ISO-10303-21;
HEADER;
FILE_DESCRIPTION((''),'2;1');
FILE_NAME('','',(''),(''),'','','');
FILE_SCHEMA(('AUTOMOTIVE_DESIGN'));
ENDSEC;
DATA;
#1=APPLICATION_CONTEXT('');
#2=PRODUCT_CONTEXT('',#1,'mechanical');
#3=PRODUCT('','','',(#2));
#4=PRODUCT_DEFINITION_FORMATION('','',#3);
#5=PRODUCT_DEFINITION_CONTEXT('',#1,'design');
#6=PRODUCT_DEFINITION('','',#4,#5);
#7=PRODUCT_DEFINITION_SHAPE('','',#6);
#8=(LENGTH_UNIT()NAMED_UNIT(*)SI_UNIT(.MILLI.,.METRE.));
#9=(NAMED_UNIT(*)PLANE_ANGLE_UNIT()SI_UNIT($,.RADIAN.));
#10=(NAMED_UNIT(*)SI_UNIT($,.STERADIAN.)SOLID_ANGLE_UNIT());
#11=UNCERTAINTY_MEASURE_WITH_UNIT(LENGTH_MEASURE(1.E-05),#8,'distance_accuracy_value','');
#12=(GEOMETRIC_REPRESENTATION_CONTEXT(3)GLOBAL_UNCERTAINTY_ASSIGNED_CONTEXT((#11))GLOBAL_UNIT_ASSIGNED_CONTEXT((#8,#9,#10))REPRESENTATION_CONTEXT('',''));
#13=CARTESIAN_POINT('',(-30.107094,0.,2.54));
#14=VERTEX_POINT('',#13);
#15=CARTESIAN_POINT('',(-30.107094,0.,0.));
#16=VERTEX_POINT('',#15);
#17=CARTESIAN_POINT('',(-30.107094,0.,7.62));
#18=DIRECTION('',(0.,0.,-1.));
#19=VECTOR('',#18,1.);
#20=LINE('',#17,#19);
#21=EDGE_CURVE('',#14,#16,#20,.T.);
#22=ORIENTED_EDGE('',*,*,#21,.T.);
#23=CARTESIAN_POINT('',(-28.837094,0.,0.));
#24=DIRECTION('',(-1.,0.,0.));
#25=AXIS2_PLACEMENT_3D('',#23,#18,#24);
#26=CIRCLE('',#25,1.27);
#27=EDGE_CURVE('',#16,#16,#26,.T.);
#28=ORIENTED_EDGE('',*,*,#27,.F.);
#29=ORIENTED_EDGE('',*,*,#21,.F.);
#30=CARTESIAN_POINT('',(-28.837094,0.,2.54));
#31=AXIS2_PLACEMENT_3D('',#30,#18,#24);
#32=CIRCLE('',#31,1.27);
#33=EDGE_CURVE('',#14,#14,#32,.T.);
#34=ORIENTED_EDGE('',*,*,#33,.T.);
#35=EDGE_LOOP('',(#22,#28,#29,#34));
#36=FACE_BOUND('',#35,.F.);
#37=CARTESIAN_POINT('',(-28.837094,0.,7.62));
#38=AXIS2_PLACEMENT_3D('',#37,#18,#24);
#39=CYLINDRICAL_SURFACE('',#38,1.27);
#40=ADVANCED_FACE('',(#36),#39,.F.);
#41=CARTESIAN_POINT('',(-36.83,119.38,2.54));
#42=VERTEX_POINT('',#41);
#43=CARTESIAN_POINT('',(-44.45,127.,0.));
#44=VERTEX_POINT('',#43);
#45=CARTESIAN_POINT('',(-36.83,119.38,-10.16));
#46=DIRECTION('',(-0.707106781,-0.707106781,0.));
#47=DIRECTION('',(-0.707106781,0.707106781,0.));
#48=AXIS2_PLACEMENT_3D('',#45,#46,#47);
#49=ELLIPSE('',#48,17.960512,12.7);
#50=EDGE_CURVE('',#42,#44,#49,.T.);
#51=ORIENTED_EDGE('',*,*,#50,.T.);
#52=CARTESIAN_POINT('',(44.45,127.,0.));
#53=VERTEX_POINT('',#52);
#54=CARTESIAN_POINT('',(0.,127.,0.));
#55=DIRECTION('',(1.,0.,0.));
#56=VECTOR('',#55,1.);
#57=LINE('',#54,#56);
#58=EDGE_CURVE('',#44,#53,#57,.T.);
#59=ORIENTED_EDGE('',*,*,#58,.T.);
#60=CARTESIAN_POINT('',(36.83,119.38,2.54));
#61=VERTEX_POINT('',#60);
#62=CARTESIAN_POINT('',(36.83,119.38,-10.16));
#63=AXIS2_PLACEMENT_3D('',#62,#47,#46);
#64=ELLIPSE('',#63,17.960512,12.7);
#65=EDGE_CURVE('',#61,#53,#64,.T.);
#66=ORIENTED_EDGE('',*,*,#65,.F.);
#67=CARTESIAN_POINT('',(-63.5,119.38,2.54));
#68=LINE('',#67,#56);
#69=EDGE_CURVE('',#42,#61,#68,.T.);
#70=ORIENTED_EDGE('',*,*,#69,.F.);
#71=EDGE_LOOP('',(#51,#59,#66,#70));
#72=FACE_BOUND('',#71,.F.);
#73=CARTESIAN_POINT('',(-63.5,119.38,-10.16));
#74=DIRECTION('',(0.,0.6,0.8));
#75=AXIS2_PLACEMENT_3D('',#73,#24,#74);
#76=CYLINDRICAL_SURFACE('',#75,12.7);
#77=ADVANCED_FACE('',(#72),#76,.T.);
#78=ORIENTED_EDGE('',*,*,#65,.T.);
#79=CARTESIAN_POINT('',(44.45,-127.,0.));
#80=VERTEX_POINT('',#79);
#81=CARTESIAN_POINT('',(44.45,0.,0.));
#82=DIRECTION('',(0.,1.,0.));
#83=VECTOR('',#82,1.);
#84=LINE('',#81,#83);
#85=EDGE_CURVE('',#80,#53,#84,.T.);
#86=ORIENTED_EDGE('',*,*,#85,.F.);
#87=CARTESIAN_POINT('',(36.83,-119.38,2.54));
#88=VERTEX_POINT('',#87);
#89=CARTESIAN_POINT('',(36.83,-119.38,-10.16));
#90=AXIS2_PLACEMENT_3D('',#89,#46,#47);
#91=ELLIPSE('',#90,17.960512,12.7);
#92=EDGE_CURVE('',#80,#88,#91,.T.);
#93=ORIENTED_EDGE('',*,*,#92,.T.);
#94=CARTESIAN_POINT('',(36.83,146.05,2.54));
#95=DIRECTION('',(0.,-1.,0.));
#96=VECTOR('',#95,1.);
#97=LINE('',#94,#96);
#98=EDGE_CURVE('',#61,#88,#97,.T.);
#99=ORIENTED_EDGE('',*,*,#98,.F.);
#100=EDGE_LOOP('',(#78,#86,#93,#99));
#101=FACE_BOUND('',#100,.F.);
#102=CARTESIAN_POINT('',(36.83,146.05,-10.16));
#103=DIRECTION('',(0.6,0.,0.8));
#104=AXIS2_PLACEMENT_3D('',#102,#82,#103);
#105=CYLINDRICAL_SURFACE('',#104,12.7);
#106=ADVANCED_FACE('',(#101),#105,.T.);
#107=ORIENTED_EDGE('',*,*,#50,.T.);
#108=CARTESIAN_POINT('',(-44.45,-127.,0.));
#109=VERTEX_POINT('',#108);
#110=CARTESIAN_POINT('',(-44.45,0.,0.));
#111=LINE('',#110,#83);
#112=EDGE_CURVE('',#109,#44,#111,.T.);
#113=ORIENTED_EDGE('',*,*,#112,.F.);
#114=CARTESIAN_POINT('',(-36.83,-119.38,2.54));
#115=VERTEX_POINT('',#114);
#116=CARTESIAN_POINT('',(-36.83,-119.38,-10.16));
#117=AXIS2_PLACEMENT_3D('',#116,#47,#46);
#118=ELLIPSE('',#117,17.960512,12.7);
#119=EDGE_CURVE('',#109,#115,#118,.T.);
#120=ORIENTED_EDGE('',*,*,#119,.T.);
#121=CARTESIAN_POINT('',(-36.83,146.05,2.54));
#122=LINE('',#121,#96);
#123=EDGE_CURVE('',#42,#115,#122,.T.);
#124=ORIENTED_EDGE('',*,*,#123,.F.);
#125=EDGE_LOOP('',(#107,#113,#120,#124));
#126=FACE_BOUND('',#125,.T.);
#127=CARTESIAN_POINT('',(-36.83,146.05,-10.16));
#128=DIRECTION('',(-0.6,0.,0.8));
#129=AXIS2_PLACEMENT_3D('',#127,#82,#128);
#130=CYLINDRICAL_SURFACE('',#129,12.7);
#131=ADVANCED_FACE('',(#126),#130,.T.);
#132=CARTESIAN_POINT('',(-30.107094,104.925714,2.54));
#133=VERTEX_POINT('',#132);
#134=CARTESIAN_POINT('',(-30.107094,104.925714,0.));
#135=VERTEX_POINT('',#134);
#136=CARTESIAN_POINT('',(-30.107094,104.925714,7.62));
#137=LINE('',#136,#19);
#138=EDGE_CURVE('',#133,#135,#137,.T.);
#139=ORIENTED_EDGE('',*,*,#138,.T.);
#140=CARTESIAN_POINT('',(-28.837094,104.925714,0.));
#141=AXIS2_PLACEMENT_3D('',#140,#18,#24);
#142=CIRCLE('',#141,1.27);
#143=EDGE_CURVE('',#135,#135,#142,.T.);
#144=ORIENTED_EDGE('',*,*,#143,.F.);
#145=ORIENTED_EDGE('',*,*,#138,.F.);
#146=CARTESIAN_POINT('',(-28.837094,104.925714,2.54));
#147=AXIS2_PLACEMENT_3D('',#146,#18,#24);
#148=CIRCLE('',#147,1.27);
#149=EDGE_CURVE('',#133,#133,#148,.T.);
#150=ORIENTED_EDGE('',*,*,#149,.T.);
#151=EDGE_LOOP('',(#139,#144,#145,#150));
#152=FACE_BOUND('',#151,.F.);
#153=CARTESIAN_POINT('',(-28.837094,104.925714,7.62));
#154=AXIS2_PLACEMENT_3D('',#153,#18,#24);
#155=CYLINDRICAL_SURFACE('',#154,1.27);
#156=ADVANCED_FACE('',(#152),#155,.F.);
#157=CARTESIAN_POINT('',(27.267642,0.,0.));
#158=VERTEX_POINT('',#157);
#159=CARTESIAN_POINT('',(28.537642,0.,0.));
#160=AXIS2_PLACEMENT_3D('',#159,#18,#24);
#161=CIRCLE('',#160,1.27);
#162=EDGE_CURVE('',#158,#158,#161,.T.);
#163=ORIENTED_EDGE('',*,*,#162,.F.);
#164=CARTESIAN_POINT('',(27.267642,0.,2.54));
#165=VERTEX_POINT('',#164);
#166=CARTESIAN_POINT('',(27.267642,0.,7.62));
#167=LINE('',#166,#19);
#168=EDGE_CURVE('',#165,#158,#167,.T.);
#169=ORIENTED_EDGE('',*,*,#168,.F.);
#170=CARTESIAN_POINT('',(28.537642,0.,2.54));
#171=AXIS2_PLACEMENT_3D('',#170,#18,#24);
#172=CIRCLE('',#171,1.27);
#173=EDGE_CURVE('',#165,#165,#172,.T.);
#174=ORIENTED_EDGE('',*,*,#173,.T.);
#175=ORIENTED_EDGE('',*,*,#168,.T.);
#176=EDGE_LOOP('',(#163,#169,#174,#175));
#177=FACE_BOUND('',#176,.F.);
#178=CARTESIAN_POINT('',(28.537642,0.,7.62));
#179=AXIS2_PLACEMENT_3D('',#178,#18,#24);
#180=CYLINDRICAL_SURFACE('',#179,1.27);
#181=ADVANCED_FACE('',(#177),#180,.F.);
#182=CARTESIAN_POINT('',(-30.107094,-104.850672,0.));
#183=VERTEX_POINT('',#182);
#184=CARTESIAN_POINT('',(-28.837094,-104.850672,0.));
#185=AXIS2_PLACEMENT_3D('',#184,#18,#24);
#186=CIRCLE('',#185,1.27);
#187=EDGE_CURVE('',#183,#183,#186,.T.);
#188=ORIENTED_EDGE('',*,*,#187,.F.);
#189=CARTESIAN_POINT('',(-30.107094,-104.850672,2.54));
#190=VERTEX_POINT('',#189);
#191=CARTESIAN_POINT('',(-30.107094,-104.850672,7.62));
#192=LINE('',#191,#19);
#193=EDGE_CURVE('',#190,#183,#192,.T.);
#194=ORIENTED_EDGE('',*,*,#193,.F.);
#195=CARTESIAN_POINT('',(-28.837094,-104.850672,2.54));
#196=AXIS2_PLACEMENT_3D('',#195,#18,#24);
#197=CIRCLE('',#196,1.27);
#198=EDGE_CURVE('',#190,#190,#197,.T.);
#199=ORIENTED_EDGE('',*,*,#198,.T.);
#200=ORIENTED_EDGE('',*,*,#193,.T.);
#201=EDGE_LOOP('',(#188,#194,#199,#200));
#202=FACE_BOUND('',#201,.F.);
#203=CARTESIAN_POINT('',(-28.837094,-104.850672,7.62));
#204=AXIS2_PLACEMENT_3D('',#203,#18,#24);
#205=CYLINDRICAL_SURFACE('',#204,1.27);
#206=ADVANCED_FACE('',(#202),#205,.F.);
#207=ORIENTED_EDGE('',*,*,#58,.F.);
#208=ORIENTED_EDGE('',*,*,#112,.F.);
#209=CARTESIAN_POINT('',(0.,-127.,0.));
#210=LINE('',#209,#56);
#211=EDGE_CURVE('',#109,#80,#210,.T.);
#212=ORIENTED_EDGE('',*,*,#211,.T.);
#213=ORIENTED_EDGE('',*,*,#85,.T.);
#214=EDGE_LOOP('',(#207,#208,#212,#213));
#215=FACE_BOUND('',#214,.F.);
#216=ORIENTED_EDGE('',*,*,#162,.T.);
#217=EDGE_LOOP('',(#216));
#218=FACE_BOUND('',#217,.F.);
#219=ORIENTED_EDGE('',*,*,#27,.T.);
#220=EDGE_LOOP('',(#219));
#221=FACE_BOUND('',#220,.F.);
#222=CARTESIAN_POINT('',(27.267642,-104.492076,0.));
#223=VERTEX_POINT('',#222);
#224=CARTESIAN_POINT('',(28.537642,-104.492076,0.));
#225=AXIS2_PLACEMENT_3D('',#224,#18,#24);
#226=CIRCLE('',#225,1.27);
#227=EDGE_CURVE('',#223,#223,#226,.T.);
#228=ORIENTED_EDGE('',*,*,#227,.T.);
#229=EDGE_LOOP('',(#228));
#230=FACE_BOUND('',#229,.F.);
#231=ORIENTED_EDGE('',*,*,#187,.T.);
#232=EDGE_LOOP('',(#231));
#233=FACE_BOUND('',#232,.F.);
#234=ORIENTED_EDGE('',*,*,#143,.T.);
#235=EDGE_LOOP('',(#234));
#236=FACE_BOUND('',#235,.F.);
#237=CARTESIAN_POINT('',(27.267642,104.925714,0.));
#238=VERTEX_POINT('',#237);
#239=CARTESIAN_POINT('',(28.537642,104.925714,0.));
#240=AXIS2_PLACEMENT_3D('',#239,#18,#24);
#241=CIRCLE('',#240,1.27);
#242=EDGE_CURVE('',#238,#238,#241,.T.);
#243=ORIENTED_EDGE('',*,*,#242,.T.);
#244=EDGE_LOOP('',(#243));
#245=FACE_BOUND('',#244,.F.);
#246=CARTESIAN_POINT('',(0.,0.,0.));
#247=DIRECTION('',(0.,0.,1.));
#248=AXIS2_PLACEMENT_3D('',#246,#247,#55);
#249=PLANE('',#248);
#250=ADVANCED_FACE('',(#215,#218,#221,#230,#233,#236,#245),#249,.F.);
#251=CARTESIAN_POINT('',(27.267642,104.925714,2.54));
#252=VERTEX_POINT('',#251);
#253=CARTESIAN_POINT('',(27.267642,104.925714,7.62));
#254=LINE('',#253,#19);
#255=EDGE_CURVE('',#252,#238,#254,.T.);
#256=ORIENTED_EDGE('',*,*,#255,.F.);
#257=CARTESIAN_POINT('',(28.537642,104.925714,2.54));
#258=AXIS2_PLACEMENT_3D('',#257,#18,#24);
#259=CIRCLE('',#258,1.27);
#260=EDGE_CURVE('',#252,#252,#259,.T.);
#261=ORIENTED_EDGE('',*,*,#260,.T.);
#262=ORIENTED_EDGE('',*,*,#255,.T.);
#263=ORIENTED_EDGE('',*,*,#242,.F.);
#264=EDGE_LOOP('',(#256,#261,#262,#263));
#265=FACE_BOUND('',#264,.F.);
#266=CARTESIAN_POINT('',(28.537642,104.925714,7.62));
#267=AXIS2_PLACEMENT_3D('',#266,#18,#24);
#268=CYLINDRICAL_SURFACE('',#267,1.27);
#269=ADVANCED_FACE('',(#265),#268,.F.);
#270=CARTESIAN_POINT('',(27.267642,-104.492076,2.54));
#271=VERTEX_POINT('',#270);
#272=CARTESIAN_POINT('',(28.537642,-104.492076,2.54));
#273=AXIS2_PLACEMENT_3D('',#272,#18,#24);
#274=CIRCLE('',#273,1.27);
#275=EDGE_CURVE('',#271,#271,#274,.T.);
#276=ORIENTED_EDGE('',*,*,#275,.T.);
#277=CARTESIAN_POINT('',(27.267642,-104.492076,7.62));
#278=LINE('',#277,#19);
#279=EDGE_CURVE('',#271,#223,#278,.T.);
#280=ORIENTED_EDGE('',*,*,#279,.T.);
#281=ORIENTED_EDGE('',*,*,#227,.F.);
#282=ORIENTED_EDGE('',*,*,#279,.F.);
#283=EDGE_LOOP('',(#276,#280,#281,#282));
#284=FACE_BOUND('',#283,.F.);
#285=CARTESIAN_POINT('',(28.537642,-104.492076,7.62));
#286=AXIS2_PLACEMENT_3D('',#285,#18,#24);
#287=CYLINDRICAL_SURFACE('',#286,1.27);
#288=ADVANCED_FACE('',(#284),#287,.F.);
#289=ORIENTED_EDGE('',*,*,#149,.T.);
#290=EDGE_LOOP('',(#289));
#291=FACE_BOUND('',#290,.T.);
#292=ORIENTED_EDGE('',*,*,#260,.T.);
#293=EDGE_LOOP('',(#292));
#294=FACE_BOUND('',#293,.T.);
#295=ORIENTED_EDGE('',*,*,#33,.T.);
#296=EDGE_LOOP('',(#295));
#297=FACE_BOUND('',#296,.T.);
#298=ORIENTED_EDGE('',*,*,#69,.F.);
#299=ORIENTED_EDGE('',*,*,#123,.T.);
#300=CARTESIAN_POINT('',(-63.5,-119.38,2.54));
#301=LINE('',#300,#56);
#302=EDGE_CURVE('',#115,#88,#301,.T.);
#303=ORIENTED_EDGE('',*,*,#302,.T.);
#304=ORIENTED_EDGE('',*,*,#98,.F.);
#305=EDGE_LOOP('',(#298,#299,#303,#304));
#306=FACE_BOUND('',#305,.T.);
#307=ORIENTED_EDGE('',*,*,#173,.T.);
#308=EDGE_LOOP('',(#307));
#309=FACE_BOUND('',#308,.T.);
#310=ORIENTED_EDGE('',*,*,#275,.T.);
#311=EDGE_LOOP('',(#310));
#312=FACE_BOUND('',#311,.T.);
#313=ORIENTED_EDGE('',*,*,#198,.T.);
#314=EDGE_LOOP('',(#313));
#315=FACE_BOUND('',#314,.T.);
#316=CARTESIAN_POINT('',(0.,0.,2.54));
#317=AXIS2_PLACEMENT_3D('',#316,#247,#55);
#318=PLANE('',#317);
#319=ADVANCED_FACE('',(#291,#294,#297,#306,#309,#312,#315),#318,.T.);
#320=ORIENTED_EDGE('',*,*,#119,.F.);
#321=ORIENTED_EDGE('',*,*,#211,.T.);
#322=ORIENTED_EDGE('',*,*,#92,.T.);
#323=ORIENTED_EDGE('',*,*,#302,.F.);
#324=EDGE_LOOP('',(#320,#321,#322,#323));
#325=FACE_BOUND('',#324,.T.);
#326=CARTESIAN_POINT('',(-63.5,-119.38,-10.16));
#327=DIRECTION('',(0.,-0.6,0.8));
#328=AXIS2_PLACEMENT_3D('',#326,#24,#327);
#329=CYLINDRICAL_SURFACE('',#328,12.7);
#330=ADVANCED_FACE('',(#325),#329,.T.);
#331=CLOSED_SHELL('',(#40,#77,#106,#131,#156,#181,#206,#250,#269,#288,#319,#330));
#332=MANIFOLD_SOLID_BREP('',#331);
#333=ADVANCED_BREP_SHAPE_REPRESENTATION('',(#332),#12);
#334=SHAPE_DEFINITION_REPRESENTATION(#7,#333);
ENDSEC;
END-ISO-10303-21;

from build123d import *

# Parameters (mm, degrees)
F0_W        = 88.9
F0_H        = 254
F1_DEPTH    = 2.54
F2_T1_DEPTH = 127
F2_T3_DEPTH = 292.1
F5_D        = 2.54
F5_DEPTH    = 5.08
F5_TIP      = 0.7630929862


# Not quite as in the source:
# - a fillet or chamfer that OpenCascade refuses, or shapes differently, is made with other operations: its cross-section is extruded or revolved along the edge and cut away or added


with BuildPart() as f1:
    # F0 (on Top) → F1 (new body)
    with BuildSketch(Plane.XY):
        Rectangle(F0_W, F0_H)
    extrude(amount=F1_DEPTH)

    # F2: fillet of radius 12.7 on 4 edges, made by hand

    # F2_s2 → F2_t1 (cut)
    with BuildSketch(Plane.YZ.offset(-63.5)):
        with BuildLine():
            ThreePointArc((127, 0), (123.3960926284, 1.8882778852), (119.38, 2.54))
            Line((119.38, 2.54), (127, 2.54))
            Line((127, 2.54), (127, 0))
        make_face()
        with BuildLine():
            ThreePointArc((-127, 0), (-123.3960926284, 1.8882778852), (-119.38, 2.54))
            Line((-119.38, 2.54), (-127, 2.54))
            Line((-127, 2.54), (-127, 0))
        make_face()
    extrude(amount=F2_T1_DEPTH, mode=Mode.SUBTRACT)

    # F2_s4 → F2_t3 (cut)
    with BuildSketch(Plane.XZ.offset(-146.05)):
        with BuildLine():
            ThreePointArc((-44.45, 0), (-40.8460926284, 1.8882778852), (-36.83, 2.54))
            Line((-36.83, 2.54), (-44.45, 2.54))
            Line((-44.45, 2.54), (-44.45, 0))
        make_face()
        with BuildLine():
            ThreePointArc((44.45, 0), (40.8460926284, 1.8882778852), (36.83, 2.54))
            Line((36.83, 2.54), (44.45, 2.54))
            Line((44.45, 2.54), (44.45, 0))
        make_face()
    extrude(amount=F2_T3_DEPTH, mode=Mode.SUBTRACT)

    # F5
    with Locations(Plane.XY.offset(2.54)):
        with Locations((-28.8370940834, 104.9257144332), (28.5376422107, 104.9257144332), (28.5376422107, 0), (-28.8370940834, 0), (-28.8370940834, -104.8506721854), (28.5376422107, -104.4920757413)):
            Hole(F5_D / 2, depth=F5_DEPTH)
            with Locations((0, 0, -(F5_DEPTH + F5_TIP / 2))):  # 118° drill point
                Cone(0, F5_D / 2, F5_TIP, mode=Mode.SUBTRACT)


solid = f1.part
